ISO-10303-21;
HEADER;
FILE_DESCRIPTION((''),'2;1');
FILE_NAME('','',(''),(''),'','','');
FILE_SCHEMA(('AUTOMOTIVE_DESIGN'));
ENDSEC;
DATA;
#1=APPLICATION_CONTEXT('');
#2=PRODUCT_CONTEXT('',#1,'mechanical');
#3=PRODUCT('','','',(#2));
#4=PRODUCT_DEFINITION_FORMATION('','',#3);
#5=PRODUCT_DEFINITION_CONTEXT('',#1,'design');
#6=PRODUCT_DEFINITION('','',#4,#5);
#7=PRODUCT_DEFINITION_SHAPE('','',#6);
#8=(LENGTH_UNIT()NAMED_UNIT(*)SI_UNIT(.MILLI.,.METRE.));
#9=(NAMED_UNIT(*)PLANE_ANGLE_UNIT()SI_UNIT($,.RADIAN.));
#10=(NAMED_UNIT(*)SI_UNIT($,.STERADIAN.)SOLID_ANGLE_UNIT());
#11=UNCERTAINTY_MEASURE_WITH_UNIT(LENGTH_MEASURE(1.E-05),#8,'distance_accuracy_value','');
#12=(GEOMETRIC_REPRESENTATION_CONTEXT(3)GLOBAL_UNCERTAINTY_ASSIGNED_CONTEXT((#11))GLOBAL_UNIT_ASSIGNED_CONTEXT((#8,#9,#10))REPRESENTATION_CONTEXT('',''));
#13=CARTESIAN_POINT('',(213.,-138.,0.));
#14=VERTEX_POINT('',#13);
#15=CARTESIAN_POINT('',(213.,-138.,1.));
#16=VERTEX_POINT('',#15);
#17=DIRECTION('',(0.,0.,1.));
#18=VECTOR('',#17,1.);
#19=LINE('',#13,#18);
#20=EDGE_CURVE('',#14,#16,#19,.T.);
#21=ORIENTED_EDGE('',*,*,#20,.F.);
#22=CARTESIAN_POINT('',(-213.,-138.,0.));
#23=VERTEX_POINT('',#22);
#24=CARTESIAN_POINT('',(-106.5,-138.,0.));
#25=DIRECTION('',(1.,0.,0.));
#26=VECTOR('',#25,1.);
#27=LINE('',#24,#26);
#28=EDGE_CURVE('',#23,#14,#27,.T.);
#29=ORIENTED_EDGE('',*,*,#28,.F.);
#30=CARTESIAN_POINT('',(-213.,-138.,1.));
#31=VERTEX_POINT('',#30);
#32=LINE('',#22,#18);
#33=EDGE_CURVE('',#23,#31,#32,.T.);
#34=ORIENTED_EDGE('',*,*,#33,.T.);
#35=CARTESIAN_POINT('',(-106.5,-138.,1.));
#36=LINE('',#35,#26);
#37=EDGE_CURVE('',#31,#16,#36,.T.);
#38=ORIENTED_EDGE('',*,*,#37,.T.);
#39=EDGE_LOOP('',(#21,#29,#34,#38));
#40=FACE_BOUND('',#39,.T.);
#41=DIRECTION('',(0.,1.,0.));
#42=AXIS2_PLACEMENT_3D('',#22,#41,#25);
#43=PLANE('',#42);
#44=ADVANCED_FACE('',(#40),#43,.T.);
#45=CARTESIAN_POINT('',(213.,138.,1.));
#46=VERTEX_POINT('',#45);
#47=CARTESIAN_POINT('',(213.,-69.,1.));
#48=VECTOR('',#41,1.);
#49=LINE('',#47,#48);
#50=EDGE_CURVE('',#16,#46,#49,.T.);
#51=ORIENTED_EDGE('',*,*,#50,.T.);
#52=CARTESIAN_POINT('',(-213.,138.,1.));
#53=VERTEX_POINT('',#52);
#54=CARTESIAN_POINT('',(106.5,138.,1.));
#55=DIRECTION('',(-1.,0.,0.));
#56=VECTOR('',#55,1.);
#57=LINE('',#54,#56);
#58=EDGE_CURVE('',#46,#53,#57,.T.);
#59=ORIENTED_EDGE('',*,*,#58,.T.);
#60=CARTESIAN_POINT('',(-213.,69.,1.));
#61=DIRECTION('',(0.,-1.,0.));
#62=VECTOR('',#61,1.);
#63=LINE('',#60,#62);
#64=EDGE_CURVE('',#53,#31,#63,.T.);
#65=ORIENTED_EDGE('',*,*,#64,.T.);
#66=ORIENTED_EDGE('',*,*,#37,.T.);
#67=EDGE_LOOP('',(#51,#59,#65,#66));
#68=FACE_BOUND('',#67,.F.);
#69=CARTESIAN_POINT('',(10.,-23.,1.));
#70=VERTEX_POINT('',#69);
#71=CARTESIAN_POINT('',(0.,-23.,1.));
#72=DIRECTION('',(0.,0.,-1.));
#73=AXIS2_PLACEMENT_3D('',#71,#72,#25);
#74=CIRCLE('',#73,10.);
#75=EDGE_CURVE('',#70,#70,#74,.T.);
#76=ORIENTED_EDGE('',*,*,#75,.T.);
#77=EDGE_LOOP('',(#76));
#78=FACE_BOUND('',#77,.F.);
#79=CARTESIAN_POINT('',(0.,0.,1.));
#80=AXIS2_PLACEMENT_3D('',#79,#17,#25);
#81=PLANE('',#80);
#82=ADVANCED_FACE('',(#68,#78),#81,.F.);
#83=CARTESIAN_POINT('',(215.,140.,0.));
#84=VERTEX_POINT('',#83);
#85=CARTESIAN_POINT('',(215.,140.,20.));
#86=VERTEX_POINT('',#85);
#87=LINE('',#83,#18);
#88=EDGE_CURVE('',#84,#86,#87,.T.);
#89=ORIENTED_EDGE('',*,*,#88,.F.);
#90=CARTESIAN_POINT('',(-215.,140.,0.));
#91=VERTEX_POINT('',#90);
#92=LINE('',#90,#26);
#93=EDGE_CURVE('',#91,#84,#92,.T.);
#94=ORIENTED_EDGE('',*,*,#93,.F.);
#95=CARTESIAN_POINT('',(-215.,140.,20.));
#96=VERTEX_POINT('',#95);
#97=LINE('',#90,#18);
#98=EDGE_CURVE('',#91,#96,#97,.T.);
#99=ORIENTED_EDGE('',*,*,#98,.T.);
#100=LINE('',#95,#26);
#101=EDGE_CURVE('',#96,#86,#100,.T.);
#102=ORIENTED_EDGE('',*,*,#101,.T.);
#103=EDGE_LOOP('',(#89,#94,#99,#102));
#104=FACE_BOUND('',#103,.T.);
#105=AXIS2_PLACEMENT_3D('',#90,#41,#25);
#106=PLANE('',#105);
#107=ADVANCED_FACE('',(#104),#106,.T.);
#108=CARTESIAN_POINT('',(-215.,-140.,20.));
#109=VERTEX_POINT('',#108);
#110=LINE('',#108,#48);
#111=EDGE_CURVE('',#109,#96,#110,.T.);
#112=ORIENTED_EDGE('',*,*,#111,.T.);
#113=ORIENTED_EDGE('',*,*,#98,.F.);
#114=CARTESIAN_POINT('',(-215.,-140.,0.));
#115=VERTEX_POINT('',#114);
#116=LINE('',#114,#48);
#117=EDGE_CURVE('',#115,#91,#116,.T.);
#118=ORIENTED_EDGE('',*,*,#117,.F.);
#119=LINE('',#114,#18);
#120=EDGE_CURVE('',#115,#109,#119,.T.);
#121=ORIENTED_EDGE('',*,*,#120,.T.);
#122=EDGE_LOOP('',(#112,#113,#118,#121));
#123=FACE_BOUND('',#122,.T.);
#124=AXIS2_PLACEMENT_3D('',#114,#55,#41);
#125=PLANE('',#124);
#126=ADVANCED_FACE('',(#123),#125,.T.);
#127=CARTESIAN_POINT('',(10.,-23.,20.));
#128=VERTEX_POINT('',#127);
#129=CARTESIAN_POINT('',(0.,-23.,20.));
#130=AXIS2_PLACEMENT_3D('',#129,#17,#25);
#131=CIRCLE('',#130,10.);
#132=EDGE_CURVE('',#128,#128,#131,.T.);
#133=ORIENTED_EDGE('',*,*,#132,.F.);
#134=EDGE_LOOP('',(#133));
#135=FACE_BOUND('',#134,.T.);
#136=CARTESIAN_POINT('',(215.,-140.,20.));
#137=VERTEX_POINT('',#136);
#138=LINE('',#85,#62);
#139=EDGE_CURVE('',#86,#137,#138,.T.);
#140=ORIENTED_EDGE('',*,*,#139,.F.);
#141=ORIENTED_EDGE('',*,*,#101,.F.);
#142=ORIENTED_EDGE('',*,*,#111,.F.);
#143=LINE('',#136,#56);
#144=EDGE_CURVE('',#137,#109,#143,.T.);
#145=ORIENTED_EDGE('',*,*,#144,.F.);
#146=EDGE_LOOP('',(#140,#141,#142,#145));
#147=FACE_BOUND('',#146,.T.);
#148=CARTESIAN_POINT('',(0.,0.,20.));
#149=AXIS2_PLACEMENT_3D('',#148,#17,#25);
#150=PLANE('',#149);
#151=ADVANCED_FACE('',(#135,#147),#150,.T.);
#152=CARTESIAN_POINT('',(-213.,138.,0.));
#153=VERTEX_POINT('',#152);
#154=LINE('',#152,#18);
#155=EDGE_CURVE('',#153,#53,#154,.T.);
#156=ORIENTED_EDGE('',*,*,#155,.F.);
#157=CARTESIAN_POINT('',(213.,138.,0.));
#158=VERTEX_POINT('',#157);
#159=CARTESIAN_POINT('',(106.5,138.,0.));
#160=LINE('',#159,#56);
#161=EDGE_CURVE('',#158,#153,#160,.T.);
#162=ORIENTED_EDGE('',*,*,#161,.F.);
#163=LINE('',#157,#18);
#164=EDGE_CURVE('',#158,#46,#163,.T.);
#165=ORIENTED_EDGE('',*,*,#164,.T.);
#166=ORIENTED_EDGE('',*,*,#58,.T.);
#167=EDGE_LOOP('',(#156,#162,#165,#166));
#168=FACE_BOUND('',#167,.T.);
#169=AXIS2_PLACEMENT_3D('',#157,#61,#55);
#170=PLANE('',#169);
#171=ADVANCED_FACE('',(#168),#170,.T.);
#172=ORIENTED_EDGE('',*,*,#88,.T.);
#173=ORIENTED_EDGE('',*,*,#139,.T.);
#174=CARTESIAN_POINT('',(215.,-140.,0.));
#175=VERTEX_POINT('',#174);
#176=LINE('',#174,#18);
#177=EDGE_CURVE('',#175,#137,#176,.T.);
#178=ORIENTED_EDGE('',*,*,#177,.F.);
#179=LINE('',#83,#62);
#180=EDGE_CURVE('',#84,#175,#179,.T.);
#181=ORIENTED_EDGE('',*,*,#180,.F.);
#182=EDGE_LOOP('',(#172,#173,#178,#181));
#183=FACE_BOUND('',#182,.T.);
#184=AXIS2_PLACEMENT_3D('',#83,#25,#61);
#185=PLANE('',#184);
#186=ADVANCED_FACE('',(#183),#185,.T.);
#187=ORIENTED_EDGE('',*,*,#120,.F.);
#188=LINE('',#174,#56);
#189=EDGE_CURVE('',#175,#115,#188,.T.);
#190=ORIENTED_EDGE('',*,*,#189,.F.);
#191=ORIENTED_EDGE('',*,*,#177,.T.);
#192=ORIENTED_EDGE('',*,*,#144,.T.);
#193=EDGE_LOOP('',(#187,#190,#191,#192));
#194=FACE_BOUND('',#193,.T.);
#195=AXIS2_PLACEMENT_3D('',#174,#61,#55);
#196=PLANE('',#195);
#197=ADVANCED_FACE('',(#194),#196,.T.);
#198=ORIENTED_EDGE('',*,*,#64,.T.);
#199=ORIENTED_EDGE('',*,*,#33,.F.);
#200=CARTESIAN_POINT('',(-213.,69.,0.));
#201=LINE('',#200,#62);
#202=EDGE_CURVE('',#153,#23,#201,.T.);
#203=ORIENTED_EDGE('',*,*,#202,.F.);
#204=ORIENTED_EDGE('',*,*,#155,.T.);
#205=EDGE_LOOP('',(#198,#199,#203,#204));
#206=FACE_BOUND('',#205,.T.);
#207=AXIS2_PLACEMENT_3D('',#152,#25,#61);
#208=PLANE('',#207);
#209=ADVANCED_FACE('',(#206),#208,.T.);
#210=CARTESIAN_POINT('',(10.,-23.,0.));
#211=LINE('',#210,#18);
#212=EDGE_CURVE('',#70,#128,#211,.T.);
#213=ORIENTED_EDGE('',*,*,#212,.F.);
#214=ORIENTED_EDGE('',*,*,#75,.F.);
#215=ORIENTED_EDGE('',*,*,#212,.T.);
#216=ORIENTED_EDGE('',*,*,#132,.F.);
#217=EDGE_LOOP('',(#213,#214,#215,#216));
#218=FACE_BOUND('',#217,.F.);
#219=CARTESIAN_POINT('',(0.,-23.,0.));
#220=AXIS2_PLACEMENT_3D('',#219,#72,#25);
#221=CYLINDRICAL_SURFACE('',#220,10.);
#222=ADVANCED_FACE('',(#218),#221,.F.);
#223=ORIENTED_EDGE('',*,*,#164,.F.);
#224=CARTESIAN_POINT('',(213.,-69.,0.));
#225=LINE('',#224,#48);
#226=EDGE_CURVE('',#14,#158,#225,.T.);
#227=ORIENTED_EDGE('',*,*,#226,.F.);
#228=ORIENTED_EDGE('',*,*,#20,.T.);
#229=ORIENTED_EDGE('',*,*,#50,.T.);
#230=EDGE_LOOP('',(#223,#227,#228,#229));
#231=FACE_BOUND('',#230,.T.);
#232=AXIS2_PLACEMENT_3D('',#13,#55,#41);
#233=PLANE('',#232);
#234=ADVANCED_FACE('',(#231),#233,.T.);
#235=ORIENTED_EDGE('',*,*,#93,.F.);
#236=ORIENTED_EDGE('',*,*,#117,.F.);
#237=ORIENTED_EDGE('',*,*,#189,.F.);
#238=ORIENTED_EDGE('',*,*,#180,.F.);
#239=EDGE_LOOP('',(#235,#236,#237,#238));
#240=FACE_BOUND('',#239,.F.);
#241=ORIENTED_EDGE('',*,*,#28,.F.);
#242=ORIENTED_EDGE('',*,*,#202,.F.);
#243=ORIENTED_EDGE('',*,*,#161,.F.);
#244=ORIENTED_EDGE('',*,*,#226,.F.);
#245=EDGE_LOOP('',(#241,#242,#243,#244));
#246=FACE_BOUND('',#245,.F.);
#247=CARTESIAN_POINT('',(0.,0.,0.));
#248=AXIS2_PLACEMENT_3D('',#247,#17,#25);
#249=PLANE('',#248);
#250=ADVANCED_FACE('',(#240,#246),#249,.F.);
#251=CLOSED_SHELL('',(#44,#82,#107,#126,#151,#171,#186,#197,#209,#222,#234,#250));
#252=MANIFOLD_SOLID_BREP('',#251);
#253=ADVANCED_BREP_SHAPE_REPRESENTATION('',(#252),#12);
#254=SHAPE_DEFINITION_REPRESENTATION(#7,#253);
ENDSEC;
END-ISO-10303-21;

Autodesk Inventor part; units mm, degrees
ref_plane "YZ Plane" through (0, 0, 0) normal (1, 0, 0) x (0, 1, 0)
ref_plane "XZ Plane" through (0, 0, 0) normal (0, 1, 0) x (-1, 0, 0)
ref_plane "XY Plane" through (0, 0, 0) normal (0, 0, 1) x (1, 0, 0)
sketch "Sketch1" plane through (0, 0, 0) normal (0, 0, 1) x (1, 0, 0)
  line L0 (-215, 140) -> (215, 140)
  line L1 (215, 140) -> (215, -140)
  line L2 (215, -140) -> (-215, -140)
  line L3 (-215, -140) -> (-215, 140)
  line L4 (-215, 140) -> (215, -140) construction
  line L5 (215, 140) -> (-215, -140) construction
  line L6 (0, 0) -> (0, -23) construction
  circle A0 centre (0, -23) radius 10
  dimension "d0" = 430
  dimension "d1" = 280
  dimension "d2" = 23
  dimension "d3" = 20
extrude "Extrusion1" add sketch "Sketch1" along normal blind 20
sketch "Sketch2" plane through (0, 0, 0) normal (0, 0, -1) x (-1, 0, 0)
  line L0 (215, -140) -> (-215, -140) projected
  line L1 (215, 140) -> (215, -140) projected
  line L2 (-215, 140) -> (215, 140) projected
  line L3 (-215, -140) -> (-215, 140) projected
  circle A0 centre (0, -23) radius 10 projected
  line L4 (213, 138) -> (213, -138)
  line L5 (213, -138) -> (-213, -138)
  line L6 (-213, -138) -> (-213, 138)
  line L7 (-213, 138) -> (213, 138)
  point P0 (0, 0)
  dimension "d6" = 2
emboss "Emboss1" sketch "Sketch2" operation cut depth 1 direction (0, 0, 1) contours L4 L5 L6 L7
properties part number "SoporteBaseElevacion"
